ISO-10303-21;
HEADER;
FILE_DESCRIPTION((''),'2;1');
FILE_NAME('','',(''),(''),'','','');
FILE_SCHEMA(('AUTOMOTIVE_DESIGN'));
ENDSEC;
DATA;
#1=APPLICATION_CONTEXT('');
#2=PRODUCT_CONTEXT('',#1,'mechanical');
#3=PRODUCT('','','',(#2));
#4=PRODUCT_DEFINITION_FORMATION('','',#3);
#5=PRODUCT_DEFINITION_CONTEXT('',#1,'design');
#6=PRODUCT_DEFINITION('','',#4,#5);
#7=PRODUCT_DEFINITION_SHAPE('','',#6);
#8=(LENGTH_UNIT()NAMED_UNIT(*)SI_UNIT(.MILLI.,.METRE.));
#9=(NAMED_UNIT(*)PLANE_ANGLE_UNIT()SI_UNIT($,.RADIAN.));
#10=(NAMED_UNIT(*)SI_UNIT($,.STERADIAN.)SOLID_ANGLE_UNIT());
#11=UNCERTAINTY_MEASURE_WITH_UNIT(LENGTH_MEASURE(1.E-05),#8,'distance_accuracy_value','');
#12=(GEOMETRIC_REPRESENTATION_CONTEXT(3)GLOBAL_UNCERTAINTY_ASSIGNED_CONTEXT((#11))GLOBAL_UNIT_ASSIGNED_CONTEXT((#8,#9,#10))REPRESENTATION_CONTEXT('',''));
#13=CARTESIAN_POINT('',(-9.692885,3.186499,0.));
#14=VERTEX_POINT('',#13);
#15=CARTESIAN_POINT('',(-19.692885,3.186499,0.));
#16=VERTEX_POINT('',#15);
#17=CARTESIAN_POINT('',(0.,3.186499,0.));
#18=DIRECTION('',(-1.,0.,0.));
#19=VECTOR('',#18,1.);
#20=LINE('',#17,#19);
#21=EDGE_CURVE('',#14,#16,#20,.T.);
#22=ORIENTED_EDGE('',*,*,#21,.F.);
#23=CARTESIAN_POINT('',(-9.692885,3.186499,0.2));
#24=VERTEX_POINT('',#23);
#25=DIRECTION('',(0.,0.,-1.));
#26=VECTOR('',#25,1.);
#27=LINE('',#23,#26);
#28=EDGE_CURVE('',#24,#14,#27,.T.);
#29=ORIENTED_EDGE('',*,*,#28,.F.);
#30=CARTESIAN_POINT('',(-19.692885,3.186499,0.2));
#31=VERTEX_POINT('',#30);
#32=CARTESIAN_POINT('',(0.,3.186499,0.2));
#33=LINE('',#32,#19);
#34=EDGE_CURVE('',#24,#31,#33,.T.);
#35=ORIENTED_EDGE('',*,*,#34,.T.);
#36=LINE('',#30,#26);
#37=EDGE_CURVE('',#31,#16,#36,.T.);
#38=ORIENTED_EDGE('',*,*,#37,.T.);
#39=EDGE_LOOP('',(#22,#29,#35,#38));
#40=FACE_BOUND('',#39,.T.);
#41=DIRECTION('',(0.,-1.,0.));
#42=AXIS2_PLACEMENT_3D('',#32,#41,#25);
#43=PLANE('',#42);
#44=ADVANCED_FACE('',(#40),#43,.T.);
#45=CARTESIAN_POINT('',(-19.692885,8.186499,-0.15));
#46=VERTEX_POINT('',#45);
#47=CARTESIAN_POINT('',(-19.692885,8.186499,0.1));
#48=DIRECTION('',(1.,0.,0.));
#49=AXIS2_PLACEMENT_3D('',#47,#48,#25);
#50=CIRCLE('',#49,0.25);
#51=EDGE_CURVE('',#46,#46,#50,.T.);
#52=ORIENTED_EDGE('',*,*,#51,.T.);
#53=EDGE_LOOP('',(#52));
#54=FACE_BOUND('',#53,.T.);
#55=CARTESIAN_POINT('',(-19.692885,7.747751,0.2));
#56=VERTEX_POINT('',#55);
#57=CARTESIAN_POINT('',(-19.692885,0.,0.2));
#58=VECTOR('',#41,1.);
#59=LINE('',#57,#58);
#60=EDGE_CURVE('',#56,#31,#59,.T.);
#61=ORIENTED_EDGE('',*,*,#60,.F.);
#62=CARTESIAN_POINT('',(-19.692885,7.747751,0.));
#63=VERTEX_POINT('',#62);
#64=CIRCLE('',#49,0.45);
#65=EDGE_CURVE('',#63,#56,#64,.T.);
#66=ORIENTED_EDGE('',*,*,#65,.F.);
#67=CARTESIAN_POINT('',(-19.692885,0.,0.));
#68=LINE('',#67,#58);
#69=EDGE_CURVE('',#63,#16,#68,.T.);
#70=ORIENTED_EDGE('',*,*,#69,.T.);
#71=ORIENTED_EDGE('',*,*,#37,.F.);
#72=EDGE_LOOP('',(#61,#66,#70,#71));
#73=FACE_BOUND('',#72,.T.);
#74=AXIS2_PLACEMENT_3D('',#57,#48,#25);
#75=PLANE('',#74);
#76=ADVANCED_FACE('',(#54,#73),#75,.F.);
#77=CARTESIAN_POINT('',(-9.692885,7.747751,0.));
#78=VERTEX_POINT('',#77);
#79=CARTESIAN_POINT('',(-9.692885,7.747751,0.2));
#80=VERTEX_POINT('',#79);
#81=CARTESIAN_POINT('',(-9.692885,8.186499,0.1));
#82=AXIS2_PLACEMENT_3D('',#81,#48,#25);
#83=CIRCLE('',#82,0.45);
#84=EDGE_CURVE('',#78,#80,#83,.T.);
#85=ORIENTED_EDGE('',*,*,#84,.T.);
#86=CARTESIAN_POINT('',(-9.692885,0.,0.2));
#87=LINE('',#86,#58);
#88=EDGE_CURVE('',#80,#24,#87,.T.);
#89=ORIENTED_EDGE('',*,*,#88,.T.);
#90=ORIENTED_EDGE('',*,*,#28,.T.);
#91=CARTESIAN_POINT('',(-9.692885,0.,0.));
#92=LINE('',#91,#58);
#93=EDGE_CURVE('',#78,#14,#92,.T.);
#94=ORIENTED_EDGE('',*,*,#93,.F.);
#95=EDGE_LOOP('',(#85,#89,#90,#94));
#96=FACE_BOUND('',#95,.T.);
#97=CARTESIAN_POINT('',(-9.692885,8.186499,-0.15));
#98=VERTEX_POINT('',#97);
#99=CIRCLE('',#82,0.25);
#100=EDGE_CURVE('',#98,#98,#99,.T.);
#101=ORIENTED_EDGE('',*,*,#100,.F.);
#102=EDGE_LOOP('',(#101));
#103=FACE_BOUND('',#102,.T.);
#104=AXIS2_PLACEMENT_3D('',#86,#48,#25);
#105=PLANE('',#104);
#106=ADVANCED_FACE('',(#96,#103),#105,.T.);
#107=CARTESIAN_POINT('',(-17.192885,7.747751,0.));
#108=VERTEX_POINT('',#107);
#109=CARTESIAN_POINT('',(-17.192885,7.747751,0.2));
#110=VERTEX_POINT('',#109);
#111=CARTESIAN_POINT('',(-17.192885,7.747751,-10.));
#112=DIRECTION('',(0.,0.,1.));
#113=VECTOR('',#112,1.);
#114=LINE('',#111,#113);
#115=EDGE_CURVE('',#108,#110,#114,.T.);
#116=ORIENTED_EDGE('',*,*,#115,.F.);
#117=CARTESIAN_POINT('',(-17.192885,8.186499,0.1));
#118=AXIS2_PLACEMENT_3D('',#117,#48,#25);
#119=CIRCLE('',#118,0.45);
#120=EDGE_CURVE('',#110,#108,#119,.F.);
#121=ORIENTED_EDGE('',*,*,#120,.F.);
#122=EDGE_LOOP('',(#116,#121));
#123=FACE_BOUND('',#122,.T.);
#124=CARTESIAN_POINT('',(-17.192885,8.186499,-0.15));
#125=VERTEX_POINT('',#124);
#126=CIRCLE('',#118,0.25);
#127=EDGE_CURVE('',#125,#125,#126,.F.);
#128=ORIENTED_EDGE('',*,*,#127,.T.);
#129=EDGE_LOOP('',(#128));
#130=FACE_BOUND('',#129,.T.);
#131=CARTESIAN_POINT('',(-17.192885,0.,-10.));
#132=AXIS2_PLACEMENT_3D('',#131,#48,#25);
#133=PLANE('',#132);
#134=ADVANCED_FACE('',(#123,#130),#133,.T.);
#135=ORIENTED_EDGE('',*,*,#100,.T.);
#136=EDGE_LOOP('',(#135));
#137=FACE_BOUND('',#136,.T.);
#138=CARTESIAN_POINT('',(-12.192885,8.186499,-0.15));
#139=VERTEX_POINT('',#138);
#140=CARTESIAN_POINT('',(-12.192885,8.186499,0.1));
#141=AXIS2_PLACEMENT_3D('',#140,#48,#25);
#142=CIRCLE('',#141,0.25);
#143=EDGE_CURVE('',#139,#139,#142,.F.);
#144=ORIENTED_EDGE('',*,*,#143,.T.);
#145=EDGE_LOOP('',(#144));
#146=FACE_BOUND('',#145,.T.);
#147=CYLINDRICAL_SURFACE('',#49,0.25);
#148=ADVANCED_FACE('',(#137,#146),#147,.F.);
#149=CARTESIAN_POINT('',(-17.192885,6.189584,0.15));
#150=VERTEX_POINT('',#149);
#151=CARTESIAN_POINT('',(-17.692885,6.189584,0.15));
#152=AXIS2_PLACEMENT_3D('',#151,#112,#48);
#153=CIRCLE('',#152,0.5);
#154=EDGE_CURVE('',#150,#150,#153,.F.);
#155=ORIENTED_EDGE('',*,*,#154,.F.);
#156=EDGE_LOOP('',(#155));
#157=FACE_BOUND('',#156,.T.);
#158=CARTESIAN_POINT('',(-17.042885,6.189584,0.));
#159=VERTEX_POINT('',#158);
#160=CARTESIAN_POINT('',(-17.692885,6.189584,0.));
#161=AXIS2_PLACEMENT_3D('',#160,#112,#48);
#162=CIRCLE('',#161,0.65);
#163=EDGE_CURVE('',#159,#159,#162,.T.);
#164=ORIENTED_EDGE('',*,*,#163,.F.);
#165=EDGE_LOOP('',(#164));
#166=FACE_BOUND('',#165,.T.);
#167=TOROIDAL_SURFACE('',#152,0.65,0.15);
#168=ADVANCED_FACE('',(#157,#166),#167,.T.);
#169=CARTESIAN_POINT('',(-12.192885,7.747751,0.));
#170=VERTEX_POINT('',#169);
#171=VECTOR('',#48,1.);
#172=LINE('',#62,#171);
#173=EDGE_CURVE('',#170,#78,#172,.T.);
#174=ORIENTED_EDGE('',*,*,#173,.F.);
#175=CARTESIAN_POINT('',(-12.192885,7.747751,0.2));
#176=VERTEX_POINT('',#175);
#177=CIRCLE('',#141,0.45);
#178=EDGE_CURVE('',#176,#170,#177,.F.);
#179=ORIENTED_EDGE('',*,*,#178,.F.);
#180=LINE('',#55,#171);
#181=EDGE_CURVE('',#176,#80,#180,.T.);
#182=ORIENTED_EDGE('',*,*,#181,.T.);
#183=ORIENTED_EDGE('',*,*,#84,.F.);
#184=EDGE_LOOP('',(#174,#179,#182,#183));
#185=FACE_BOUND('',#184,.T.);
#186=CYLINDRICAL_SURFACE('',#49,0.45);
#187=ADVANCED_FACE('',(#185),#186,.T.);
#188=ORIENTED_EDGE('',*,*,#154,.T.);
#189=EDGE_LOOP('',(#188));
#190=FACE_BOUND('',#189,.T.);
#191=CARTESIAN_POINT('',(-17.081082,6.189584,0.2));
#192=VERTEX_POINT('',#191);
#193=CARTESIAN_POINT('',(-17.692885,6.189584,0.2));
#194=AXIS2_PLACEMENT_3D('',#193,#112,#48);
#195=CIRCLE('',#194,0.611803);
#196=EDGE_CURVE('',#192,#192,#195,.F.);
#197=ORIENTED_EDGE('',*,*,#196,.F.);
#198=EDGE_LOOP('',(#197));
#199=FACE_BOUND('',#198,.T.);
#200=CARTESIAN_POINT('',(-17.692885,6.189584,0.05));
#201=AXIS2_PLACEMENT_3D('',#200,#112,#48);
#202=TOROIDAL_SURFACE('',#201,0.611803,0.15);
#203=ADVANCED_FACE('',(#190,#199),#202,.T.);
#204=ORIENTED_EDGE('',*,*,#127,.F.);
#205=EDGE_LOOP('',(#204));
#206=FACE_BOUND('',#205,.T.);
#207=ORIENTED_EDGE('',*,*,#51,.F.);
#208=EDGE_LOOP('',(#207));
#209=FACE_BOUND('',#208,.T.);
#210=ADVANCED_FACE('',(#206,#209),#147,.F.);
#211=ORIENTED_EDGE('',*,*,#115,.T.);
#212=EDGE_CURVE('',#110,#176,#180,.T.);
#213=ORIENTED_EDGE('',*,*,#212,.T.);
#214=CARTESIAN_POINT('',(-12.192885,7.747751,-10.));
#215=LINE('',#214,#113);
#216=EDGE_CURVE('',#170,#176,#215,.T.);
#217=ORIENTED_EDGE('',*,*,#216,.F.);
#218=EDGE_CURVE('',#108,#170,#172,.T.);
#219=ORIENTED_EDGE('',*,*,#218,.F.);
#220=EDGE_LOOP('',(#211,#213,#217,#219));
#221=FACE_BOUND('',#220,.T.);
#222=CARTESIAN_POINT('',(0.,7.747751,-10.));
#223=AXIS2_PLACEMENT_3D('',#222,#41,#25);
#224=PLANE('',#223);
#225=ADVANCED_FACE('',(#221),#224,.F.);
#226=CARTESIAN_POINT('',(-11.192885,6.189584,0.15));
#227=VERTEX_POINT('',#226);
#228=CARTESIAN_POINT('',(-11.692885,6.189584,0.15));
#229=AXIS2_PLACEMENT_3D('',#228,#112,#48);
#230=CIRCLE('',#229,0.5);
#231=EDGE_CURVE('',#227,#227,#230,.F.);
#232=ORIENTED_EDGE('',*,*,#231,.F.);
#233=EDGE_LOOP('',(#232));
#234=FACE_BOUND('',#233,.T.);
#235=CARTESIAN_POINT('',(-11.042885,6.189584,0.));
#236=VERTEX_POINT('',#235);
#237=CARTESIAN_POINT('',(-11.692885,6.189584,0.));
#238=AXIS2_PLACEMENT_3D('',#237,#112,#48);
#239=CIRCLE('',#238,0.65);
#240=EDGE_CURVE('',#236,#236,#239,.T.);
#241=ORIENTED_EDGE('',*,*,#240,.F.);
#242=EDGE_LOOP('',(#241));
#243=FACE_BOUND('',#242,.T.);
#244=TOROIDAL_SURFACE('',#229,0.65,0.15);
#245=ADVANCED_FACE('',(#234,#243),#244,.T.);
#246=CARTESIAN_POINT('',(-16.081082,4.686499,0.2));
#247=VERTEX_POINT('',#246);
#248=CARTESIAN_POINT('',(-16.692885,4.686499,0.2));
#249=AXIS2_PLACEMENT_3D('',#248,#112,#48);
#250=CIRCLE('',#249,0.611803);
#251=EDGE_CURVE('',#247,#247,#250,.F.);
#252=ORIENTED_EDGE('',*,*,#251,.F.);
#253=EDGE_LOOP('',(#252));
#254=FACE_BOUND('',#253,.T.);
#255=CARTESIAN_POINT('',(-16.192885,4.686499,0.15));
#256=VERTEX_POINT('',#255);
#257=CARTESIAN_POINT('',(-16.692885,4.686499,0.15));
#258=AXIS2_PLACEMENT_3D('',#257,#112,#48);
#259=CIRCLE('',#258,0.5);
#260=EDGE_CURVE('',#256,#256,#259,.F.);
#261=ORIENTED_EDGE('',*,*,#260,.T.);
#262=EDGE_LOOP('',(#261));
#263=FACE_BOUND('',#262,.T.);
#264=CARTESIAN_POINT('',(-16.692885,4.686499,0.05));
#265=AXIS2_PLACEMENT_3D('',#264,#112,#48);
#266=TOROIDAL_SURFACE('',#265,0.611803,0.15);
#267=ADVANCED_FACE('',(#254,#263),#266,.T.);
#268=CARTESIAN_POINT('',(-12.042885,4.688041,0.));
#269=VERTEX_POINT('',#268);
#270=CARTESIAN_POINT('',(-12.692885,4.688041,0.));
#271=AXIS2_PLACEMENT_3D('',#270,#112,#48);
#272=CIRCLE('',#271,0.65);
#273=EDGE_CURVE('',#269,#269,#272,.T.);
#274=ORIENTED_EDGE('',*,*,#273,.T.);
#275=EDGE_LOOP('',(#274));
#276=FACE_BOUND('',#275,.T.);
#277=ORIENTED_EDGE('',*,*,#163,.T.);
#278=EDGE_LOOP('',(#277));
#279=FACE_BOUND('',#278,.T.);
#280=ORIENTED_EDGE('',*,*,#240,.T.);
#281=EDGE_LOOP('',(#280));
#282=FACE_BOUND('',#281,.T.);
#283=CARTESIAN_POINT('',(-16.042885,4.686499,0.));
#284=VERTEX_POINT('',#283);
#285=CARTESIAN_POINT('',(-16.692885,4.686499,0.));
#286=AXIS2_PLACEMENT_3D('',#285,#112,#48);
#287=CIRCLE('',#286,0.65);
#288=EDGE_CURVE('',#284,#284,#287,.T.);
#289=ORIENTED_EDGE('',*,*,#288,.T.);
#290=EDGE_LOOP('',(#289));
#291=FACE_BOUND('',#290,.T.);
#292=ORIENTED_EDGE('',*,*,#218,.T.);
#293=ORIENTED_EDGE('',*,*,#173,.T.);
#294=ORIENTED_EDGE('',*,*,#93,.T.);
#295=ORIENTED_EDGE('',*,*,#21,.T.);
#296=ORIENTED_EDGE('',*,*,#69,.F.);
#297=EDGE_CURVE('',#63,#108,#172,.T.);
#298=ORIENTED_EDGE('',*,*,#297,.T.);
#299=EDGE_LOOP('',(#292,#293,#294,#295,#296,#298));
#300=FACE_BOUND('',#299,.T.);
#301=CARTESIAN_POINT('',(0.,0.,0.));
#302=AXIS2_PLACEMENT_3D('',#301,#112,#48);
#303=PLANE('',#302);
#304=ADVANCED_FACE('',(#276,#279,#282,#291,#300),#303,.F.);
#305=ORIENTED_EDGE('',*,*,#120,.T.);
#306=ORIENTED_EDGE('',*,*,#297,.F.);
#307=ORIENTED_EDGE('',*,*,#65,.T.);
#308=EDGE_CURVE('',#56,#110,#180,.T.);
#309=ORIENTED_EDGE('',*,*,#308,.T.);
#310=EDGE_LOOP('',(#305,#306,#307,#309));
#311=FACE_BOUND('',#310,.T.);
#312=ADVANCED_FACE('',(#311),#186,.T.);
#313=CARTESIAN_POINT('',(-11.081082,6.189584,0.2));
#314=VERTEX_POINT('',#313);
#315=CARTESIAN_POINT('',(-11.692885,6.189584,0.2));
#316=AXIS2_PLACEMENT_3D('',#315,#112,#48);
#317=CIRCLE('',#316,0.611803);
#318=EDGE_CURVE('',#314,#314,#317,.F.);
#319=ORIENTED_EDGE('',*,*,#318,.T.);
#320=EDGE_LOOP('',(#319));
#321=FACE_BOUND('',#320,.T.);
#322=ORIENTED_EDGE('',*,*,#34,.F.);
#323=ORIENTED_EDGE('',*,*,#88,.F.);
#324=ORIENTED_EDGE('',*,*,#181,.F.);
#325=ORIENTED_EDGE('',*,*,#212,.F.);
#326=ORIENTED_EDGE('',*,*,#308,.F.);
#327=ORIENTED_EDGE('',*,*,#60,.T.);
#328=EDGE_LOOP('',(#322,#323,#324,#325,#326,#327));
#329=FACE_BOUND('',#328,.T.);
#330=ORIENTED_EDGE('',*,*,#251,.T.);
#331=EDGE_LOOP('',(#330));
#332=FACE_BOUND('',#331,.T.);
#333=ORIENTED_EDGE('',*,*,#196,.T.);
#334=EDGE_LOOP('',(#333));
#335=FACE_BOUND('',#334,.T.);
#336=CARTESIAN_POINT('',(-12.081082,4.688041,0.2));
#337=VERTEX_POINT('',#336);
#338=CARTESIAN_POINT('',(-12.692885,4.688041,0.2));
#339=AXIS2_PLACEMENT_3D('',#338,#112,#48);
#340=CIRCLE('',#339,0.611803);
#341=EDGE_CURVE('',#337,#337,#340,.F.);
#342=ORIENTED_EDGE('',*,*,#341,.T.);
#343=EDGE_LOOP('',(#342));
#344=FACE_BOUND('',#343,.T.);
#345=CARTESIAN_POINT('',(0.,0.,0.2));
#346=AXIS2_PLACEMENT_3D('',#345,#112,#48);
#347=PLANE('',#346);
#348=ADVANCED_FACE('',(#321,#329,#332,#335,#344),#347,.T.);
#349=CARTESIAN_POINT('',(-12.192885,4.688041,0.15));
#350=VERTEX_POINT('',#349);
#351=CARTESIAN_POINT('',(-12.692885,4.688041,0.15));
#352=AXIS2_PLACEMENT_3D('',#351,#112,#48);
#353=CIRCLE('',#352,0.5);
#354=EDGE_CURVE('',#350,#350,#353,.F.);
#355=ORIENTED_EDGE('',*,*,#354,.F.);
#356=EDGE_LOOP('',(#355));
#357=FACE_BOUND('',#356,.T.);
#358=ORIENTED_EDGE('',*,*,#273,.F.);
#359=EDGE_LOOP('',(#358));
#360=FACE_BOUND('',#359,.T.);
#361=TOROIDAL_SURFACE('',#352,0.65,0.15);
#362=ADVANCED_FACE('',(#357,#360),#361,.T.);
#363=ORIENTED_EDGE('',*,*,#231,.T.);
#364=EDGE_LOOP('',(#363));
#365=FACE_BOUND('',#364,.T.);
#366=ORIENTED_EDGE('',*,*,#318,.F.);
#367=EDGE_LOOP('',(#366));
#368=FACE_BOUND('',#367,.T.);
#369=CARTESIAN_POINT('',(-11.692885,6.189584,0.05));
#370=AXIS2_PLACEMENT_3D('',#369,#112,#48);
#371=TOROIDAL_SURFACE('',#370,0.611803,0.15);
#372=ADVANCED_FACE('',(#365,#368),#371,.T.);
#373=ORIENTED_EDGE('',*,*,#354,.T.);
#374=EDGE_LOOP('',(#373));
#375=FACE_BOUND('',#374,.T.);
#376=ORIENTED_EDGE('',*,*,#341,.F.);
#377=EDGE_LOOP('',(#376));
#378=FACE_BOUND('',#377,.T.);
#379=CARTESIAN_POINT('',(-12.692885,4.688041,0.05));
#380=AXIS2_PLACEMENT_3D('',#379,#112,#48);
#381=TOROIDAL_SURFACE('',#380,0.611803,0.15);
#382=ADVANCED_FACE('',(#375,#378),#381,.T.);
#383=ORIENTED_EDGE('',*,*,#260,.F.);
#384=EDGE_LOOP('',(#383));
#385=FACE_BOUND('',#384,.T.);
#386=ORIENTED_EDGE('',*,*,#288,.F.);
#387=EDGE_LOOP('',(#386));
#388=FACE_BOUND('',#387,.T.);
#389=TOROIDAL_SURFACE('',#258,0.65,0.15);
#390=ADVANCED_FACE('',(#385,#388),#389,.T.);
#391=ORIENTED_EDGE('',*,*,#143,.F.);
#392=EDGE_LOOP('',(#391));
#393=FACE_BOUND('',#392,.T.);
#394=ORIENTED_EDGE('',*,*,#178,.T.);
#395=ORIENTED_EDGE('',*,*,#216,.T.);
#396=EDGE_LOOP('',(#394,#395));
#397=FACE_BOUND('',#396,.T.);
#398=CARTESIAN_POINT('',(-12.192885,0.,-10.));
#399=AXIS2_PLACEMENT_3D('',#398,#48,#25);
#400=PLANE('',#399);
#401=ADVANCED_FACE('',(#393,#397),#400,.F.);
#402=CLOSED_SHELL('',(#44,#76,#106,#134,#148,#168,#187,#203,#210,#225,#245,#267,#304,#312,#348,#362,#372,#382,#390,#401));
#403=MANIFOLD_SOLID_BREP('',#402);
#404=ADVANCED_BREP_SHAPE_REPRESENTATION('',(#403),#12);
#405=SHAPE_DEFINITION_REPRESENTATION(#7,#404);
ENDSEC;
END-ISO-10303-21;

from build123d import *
from build123d.topology import SkipClean

# Parameters (mm, degrees)
ESBO_O1_W                  = 10
ESBO_O1_H                  = 5
ESBO_O1_R                  = 0.5
RESSALTO_EXTRUS_O1_DEPTH   = 0.2
FILETE1_R                  = 0.15
FILETE2_R                  = 0.15
ESBO_O2_R                  = 0.45
ESBO_O2_R_2                = 0.25
RESSALTO_EXTRUS_O2_DEPTH   = 10
CORTE_EXTRUS_O1_DEPTH      = 10
CORTE_EXTRUS_O2_DEPTH      = 10
CORTE_EXTRUS_O2_DEPTH_BACK = 10
ESBO_O4_W                  = 5
ESBO_O4_H                  = 1.5


with BuildPart() as part:
    # Esboço1 → Ressalto-extrusão1 (new body)
    with BuildSketch(Plane.XY):
        with Locations((-14.692885356, 5.686498983)):
            Rectangle(ESBO_O1_W, ESBO_O1_H)
        with Locations((-11.692885356, 6.18958374)):
            Circle(ESBO_O1_R, mode=Mode.SUBTRACT)
        with Locations((-12.692885356, 4.688041362)):
            Circle(ESBO_O1_R, mode=Mode.SUBTRACT)
        with Locations((-17.692885356, 6.18958374)):
            Circle(ESBO_O1_R, mode=Mode.SUBTRACT)
        with Locations((-16.692885356, 4.686498983)):
            Circle(ESBO_O1_R, mode=Mode.SUBTRACT)
    extrude(amount=RESSALTO_EXTRUS_O1_DEPTH)

    # Filete1
    filete1_edges = [part.edges().sort_by_distance(p)[0] for p in [
        (-12.192885356, 6.18958374, 0),
        (-13.192885356, 4.688041362, 0),
        (-18.192885356, 6.18958374, 0),
        (-17.192885356, 4.686498983, 0),
    ]]
    fillet(filete1_edges, radius=FILETE1_R)

    # Filete2
    # the kernel refuses this fillet: 0.15 mm, written as the material it takes off along each edge
    with BuildSketch(Plane(origin=(-17.692885356, 6.18958374, 0.2), x_dir=(1, 0, 0), z_dir=(0, -1, 0))) as filete2_piece_1:
        with BuildLine():
            CenterArc((0.611803399, -0.15), FILETE2_R, 90, 48.189685104)
            Line((0.5, -0.05), (0.497763932, -0.048))
            ThreePointArc((0.497763932, -0.048), (0.497, -0.025), (0.497, 0))
            Line((0.497, 0), (0.5, 0.003))
            Line((0.5, 0.003), (0.611803399, 0.003))
            Line((0.611803399, 0.003), (0.611803399, 0))
        make_face()
    revolve(axis=Axis((-17.692885356, 6.18958374, 0.2), (0, 0, 1)), mode=Mode.SUBTRACT)
    with BuildSketch(Plane(origin=(-12.692885356, 4.688041362, 0.2), x_dir=(1, 0, 0), z_dir=(0, -1, 0))) as filete2_piece_2:
        with BuildLine():
            CenterArc((0.611803399, -0.15), FILETE2_R, 90, 48.189685104)
            Line((0.5, -0.05), (0.497763932, -0.048))
            ThreePointArc((0.497763932, -0.048), (0.497, -0.025), (0.497, 0))
            Line((0.497, 0), (0.5, 0.003))
            Line((0.5, 0.003), (0.611803399, 0.003))
            Line((0.611803399, 0.003), (0.611803399, 0))
        make_face()
    revolve(axis=Axis((-12.692885356, 4.688041362, 0.2), (0, 0, 1)), mode=Mode.SUBTRACT)
    with BuildSketch(Plane(origin=(-11.692885356, 6.18958374, 0.2), x_dir=(1, 0, 0), z_dir=(0, -1, 0))) as filete2_piece_3:
        with BuildLine():
            CenterArc((0.611803399, -0.15), FILETE2_R, 90, 48.189685104)
            Line((0.611803399, 0), (0.611803399, 0.003))
            Line((0.611803399, 0.003), (0.5, 0.003))
            Line((0.5, 0.003), (0.497, 0))
            ThreePointArc((0.497, 0), (0.497, -0.025), (0.497763932, -0.048))
            Line((0.497763932, -0.048), (0.5, -0.05))
        make_face()
    revolve(axis=Axis((-11.692885356, 6.18958374, 0.2), (0, 0, 1)), mode=Mode.SUBTRACT)
    with BuildSketch(Plane(origin=(-16.692885356, 4.686498983, 0.2), x_dir=(1, 0, 0), z_dir=(0, -1, 0))) as filete2_piece_4:
        with BuildLine():
            CenterArc((0.611803399, -0.15), FILETE2_R, 90, 48.189685104)
            Line((0.5, -0.05), (0.497763932, -0.048))
            ThreePointArc((0.497763932, -0.048), (0.497, -0.025), (0.497, 0))
            Line((0.497, 0), (0.5, 0.003))
            Line((0.5, 0.003), (0.611803399, 0.003))
            Line((0.611803399, 0.003), (0.611803399, 0))
        make_face()
    revolve(axis=Axis((-16.692885356, 4.686498983, 0.2), (0, 0, 1)), mode=Mode.SUBTRACT)

    # Esboço2 → Ressalto-extrusão2 (add)
    with BuildSketch(Plane(origin=(-9.692885356, 0, 0), x_dir=(0, 0, -1), z_dir=(1, 0, 0))):
        with Locations((-0.1, 8.186498983)):
            Circle(ESBO_O2_R)
        with Locations((-0.1, 8.186498983)):
            Circle(ESBO_O2_R_2, mode=Mode.SUBTRACT)
    extrude(amount=-RESSALTO_EXTRUS_O2_DEPTH)

    # Esboço3 → Corte-extrusão1 (cut)
    with SkipClean():  # the faces are left unmerged after this step: merging them gives an invalid solid
        with BuildSketch(Plane(origin=(-9.692885356, 0, 0), x_dir=(0, 0, -1), z_dir=(1, 0, 0))):
            with BuildLine():
                Line((-0.2, 8.186498983), (-0.2, 7.957370198))
                ThreePointArc((-0.2, 7.957370198), (-0.1, 8.436498983), (0, 7.957370198))
                Line((0, 7.957370198), (0, 8.186498983))
                Line((0, 8.186498983), (-0.2, 8.186498983))
            make_face()
            with BuildLine():
                Line((0, 8.186498983), (0, 7.957370198))
                ThreePointArc((0, 7.957370198), (0.109165007, 8.049568344), (0.15, 8.186498983))
                ThreePointArc((0.15, 8.186498983), (-0.236930639, 8.39566399), (-0.2, 7.957370198))
                Line((-0.2, 7.957370198), (-0.2, 8.186498983))
                Line((-0.2, 8.186498983), (0, 8.186498983))
            make_face()
            with BuildLine():
                ThreePointArc((-0.2, 7.957370198), (-0.1, 7.936498983), (0, 7.957370198))
                Line((0, 7.957370198), (0, 8.186498983))
                Line((0, 8.186498983), (-0.2, 8.186498983))
                Line((-0.2, 8.186498983), (-0.2, 7.957370198))
            make_face()
        extrude(amount=-CORTE_EXTRUS_O1_DEPTH, mode=Mode.SUBTRACT)

    # Esboço4 → Corte-extrusão2 (cut, two sides: drawn at the far end of the back side and taken through both)
    with BuildSketch(Plane(origin=(0, 0, 0), x_dir=(-1, 0, 0), z_dir=(0, 0, -1)).offset(-CORTE_EXTRUS_O2_DEPTH_BACK)):
        with Locations((14.692885356, 8.497750764)):
            Rectangle(ESBO_O4_W, ESBO_O4_H)
    extrude(amount=CORTE_EXTRUS_O2_DEPTH + CORTE_EXTRUS_O2_DEPTH_BACK, mode=Mode.SUBTRACT)


solid = part.part
